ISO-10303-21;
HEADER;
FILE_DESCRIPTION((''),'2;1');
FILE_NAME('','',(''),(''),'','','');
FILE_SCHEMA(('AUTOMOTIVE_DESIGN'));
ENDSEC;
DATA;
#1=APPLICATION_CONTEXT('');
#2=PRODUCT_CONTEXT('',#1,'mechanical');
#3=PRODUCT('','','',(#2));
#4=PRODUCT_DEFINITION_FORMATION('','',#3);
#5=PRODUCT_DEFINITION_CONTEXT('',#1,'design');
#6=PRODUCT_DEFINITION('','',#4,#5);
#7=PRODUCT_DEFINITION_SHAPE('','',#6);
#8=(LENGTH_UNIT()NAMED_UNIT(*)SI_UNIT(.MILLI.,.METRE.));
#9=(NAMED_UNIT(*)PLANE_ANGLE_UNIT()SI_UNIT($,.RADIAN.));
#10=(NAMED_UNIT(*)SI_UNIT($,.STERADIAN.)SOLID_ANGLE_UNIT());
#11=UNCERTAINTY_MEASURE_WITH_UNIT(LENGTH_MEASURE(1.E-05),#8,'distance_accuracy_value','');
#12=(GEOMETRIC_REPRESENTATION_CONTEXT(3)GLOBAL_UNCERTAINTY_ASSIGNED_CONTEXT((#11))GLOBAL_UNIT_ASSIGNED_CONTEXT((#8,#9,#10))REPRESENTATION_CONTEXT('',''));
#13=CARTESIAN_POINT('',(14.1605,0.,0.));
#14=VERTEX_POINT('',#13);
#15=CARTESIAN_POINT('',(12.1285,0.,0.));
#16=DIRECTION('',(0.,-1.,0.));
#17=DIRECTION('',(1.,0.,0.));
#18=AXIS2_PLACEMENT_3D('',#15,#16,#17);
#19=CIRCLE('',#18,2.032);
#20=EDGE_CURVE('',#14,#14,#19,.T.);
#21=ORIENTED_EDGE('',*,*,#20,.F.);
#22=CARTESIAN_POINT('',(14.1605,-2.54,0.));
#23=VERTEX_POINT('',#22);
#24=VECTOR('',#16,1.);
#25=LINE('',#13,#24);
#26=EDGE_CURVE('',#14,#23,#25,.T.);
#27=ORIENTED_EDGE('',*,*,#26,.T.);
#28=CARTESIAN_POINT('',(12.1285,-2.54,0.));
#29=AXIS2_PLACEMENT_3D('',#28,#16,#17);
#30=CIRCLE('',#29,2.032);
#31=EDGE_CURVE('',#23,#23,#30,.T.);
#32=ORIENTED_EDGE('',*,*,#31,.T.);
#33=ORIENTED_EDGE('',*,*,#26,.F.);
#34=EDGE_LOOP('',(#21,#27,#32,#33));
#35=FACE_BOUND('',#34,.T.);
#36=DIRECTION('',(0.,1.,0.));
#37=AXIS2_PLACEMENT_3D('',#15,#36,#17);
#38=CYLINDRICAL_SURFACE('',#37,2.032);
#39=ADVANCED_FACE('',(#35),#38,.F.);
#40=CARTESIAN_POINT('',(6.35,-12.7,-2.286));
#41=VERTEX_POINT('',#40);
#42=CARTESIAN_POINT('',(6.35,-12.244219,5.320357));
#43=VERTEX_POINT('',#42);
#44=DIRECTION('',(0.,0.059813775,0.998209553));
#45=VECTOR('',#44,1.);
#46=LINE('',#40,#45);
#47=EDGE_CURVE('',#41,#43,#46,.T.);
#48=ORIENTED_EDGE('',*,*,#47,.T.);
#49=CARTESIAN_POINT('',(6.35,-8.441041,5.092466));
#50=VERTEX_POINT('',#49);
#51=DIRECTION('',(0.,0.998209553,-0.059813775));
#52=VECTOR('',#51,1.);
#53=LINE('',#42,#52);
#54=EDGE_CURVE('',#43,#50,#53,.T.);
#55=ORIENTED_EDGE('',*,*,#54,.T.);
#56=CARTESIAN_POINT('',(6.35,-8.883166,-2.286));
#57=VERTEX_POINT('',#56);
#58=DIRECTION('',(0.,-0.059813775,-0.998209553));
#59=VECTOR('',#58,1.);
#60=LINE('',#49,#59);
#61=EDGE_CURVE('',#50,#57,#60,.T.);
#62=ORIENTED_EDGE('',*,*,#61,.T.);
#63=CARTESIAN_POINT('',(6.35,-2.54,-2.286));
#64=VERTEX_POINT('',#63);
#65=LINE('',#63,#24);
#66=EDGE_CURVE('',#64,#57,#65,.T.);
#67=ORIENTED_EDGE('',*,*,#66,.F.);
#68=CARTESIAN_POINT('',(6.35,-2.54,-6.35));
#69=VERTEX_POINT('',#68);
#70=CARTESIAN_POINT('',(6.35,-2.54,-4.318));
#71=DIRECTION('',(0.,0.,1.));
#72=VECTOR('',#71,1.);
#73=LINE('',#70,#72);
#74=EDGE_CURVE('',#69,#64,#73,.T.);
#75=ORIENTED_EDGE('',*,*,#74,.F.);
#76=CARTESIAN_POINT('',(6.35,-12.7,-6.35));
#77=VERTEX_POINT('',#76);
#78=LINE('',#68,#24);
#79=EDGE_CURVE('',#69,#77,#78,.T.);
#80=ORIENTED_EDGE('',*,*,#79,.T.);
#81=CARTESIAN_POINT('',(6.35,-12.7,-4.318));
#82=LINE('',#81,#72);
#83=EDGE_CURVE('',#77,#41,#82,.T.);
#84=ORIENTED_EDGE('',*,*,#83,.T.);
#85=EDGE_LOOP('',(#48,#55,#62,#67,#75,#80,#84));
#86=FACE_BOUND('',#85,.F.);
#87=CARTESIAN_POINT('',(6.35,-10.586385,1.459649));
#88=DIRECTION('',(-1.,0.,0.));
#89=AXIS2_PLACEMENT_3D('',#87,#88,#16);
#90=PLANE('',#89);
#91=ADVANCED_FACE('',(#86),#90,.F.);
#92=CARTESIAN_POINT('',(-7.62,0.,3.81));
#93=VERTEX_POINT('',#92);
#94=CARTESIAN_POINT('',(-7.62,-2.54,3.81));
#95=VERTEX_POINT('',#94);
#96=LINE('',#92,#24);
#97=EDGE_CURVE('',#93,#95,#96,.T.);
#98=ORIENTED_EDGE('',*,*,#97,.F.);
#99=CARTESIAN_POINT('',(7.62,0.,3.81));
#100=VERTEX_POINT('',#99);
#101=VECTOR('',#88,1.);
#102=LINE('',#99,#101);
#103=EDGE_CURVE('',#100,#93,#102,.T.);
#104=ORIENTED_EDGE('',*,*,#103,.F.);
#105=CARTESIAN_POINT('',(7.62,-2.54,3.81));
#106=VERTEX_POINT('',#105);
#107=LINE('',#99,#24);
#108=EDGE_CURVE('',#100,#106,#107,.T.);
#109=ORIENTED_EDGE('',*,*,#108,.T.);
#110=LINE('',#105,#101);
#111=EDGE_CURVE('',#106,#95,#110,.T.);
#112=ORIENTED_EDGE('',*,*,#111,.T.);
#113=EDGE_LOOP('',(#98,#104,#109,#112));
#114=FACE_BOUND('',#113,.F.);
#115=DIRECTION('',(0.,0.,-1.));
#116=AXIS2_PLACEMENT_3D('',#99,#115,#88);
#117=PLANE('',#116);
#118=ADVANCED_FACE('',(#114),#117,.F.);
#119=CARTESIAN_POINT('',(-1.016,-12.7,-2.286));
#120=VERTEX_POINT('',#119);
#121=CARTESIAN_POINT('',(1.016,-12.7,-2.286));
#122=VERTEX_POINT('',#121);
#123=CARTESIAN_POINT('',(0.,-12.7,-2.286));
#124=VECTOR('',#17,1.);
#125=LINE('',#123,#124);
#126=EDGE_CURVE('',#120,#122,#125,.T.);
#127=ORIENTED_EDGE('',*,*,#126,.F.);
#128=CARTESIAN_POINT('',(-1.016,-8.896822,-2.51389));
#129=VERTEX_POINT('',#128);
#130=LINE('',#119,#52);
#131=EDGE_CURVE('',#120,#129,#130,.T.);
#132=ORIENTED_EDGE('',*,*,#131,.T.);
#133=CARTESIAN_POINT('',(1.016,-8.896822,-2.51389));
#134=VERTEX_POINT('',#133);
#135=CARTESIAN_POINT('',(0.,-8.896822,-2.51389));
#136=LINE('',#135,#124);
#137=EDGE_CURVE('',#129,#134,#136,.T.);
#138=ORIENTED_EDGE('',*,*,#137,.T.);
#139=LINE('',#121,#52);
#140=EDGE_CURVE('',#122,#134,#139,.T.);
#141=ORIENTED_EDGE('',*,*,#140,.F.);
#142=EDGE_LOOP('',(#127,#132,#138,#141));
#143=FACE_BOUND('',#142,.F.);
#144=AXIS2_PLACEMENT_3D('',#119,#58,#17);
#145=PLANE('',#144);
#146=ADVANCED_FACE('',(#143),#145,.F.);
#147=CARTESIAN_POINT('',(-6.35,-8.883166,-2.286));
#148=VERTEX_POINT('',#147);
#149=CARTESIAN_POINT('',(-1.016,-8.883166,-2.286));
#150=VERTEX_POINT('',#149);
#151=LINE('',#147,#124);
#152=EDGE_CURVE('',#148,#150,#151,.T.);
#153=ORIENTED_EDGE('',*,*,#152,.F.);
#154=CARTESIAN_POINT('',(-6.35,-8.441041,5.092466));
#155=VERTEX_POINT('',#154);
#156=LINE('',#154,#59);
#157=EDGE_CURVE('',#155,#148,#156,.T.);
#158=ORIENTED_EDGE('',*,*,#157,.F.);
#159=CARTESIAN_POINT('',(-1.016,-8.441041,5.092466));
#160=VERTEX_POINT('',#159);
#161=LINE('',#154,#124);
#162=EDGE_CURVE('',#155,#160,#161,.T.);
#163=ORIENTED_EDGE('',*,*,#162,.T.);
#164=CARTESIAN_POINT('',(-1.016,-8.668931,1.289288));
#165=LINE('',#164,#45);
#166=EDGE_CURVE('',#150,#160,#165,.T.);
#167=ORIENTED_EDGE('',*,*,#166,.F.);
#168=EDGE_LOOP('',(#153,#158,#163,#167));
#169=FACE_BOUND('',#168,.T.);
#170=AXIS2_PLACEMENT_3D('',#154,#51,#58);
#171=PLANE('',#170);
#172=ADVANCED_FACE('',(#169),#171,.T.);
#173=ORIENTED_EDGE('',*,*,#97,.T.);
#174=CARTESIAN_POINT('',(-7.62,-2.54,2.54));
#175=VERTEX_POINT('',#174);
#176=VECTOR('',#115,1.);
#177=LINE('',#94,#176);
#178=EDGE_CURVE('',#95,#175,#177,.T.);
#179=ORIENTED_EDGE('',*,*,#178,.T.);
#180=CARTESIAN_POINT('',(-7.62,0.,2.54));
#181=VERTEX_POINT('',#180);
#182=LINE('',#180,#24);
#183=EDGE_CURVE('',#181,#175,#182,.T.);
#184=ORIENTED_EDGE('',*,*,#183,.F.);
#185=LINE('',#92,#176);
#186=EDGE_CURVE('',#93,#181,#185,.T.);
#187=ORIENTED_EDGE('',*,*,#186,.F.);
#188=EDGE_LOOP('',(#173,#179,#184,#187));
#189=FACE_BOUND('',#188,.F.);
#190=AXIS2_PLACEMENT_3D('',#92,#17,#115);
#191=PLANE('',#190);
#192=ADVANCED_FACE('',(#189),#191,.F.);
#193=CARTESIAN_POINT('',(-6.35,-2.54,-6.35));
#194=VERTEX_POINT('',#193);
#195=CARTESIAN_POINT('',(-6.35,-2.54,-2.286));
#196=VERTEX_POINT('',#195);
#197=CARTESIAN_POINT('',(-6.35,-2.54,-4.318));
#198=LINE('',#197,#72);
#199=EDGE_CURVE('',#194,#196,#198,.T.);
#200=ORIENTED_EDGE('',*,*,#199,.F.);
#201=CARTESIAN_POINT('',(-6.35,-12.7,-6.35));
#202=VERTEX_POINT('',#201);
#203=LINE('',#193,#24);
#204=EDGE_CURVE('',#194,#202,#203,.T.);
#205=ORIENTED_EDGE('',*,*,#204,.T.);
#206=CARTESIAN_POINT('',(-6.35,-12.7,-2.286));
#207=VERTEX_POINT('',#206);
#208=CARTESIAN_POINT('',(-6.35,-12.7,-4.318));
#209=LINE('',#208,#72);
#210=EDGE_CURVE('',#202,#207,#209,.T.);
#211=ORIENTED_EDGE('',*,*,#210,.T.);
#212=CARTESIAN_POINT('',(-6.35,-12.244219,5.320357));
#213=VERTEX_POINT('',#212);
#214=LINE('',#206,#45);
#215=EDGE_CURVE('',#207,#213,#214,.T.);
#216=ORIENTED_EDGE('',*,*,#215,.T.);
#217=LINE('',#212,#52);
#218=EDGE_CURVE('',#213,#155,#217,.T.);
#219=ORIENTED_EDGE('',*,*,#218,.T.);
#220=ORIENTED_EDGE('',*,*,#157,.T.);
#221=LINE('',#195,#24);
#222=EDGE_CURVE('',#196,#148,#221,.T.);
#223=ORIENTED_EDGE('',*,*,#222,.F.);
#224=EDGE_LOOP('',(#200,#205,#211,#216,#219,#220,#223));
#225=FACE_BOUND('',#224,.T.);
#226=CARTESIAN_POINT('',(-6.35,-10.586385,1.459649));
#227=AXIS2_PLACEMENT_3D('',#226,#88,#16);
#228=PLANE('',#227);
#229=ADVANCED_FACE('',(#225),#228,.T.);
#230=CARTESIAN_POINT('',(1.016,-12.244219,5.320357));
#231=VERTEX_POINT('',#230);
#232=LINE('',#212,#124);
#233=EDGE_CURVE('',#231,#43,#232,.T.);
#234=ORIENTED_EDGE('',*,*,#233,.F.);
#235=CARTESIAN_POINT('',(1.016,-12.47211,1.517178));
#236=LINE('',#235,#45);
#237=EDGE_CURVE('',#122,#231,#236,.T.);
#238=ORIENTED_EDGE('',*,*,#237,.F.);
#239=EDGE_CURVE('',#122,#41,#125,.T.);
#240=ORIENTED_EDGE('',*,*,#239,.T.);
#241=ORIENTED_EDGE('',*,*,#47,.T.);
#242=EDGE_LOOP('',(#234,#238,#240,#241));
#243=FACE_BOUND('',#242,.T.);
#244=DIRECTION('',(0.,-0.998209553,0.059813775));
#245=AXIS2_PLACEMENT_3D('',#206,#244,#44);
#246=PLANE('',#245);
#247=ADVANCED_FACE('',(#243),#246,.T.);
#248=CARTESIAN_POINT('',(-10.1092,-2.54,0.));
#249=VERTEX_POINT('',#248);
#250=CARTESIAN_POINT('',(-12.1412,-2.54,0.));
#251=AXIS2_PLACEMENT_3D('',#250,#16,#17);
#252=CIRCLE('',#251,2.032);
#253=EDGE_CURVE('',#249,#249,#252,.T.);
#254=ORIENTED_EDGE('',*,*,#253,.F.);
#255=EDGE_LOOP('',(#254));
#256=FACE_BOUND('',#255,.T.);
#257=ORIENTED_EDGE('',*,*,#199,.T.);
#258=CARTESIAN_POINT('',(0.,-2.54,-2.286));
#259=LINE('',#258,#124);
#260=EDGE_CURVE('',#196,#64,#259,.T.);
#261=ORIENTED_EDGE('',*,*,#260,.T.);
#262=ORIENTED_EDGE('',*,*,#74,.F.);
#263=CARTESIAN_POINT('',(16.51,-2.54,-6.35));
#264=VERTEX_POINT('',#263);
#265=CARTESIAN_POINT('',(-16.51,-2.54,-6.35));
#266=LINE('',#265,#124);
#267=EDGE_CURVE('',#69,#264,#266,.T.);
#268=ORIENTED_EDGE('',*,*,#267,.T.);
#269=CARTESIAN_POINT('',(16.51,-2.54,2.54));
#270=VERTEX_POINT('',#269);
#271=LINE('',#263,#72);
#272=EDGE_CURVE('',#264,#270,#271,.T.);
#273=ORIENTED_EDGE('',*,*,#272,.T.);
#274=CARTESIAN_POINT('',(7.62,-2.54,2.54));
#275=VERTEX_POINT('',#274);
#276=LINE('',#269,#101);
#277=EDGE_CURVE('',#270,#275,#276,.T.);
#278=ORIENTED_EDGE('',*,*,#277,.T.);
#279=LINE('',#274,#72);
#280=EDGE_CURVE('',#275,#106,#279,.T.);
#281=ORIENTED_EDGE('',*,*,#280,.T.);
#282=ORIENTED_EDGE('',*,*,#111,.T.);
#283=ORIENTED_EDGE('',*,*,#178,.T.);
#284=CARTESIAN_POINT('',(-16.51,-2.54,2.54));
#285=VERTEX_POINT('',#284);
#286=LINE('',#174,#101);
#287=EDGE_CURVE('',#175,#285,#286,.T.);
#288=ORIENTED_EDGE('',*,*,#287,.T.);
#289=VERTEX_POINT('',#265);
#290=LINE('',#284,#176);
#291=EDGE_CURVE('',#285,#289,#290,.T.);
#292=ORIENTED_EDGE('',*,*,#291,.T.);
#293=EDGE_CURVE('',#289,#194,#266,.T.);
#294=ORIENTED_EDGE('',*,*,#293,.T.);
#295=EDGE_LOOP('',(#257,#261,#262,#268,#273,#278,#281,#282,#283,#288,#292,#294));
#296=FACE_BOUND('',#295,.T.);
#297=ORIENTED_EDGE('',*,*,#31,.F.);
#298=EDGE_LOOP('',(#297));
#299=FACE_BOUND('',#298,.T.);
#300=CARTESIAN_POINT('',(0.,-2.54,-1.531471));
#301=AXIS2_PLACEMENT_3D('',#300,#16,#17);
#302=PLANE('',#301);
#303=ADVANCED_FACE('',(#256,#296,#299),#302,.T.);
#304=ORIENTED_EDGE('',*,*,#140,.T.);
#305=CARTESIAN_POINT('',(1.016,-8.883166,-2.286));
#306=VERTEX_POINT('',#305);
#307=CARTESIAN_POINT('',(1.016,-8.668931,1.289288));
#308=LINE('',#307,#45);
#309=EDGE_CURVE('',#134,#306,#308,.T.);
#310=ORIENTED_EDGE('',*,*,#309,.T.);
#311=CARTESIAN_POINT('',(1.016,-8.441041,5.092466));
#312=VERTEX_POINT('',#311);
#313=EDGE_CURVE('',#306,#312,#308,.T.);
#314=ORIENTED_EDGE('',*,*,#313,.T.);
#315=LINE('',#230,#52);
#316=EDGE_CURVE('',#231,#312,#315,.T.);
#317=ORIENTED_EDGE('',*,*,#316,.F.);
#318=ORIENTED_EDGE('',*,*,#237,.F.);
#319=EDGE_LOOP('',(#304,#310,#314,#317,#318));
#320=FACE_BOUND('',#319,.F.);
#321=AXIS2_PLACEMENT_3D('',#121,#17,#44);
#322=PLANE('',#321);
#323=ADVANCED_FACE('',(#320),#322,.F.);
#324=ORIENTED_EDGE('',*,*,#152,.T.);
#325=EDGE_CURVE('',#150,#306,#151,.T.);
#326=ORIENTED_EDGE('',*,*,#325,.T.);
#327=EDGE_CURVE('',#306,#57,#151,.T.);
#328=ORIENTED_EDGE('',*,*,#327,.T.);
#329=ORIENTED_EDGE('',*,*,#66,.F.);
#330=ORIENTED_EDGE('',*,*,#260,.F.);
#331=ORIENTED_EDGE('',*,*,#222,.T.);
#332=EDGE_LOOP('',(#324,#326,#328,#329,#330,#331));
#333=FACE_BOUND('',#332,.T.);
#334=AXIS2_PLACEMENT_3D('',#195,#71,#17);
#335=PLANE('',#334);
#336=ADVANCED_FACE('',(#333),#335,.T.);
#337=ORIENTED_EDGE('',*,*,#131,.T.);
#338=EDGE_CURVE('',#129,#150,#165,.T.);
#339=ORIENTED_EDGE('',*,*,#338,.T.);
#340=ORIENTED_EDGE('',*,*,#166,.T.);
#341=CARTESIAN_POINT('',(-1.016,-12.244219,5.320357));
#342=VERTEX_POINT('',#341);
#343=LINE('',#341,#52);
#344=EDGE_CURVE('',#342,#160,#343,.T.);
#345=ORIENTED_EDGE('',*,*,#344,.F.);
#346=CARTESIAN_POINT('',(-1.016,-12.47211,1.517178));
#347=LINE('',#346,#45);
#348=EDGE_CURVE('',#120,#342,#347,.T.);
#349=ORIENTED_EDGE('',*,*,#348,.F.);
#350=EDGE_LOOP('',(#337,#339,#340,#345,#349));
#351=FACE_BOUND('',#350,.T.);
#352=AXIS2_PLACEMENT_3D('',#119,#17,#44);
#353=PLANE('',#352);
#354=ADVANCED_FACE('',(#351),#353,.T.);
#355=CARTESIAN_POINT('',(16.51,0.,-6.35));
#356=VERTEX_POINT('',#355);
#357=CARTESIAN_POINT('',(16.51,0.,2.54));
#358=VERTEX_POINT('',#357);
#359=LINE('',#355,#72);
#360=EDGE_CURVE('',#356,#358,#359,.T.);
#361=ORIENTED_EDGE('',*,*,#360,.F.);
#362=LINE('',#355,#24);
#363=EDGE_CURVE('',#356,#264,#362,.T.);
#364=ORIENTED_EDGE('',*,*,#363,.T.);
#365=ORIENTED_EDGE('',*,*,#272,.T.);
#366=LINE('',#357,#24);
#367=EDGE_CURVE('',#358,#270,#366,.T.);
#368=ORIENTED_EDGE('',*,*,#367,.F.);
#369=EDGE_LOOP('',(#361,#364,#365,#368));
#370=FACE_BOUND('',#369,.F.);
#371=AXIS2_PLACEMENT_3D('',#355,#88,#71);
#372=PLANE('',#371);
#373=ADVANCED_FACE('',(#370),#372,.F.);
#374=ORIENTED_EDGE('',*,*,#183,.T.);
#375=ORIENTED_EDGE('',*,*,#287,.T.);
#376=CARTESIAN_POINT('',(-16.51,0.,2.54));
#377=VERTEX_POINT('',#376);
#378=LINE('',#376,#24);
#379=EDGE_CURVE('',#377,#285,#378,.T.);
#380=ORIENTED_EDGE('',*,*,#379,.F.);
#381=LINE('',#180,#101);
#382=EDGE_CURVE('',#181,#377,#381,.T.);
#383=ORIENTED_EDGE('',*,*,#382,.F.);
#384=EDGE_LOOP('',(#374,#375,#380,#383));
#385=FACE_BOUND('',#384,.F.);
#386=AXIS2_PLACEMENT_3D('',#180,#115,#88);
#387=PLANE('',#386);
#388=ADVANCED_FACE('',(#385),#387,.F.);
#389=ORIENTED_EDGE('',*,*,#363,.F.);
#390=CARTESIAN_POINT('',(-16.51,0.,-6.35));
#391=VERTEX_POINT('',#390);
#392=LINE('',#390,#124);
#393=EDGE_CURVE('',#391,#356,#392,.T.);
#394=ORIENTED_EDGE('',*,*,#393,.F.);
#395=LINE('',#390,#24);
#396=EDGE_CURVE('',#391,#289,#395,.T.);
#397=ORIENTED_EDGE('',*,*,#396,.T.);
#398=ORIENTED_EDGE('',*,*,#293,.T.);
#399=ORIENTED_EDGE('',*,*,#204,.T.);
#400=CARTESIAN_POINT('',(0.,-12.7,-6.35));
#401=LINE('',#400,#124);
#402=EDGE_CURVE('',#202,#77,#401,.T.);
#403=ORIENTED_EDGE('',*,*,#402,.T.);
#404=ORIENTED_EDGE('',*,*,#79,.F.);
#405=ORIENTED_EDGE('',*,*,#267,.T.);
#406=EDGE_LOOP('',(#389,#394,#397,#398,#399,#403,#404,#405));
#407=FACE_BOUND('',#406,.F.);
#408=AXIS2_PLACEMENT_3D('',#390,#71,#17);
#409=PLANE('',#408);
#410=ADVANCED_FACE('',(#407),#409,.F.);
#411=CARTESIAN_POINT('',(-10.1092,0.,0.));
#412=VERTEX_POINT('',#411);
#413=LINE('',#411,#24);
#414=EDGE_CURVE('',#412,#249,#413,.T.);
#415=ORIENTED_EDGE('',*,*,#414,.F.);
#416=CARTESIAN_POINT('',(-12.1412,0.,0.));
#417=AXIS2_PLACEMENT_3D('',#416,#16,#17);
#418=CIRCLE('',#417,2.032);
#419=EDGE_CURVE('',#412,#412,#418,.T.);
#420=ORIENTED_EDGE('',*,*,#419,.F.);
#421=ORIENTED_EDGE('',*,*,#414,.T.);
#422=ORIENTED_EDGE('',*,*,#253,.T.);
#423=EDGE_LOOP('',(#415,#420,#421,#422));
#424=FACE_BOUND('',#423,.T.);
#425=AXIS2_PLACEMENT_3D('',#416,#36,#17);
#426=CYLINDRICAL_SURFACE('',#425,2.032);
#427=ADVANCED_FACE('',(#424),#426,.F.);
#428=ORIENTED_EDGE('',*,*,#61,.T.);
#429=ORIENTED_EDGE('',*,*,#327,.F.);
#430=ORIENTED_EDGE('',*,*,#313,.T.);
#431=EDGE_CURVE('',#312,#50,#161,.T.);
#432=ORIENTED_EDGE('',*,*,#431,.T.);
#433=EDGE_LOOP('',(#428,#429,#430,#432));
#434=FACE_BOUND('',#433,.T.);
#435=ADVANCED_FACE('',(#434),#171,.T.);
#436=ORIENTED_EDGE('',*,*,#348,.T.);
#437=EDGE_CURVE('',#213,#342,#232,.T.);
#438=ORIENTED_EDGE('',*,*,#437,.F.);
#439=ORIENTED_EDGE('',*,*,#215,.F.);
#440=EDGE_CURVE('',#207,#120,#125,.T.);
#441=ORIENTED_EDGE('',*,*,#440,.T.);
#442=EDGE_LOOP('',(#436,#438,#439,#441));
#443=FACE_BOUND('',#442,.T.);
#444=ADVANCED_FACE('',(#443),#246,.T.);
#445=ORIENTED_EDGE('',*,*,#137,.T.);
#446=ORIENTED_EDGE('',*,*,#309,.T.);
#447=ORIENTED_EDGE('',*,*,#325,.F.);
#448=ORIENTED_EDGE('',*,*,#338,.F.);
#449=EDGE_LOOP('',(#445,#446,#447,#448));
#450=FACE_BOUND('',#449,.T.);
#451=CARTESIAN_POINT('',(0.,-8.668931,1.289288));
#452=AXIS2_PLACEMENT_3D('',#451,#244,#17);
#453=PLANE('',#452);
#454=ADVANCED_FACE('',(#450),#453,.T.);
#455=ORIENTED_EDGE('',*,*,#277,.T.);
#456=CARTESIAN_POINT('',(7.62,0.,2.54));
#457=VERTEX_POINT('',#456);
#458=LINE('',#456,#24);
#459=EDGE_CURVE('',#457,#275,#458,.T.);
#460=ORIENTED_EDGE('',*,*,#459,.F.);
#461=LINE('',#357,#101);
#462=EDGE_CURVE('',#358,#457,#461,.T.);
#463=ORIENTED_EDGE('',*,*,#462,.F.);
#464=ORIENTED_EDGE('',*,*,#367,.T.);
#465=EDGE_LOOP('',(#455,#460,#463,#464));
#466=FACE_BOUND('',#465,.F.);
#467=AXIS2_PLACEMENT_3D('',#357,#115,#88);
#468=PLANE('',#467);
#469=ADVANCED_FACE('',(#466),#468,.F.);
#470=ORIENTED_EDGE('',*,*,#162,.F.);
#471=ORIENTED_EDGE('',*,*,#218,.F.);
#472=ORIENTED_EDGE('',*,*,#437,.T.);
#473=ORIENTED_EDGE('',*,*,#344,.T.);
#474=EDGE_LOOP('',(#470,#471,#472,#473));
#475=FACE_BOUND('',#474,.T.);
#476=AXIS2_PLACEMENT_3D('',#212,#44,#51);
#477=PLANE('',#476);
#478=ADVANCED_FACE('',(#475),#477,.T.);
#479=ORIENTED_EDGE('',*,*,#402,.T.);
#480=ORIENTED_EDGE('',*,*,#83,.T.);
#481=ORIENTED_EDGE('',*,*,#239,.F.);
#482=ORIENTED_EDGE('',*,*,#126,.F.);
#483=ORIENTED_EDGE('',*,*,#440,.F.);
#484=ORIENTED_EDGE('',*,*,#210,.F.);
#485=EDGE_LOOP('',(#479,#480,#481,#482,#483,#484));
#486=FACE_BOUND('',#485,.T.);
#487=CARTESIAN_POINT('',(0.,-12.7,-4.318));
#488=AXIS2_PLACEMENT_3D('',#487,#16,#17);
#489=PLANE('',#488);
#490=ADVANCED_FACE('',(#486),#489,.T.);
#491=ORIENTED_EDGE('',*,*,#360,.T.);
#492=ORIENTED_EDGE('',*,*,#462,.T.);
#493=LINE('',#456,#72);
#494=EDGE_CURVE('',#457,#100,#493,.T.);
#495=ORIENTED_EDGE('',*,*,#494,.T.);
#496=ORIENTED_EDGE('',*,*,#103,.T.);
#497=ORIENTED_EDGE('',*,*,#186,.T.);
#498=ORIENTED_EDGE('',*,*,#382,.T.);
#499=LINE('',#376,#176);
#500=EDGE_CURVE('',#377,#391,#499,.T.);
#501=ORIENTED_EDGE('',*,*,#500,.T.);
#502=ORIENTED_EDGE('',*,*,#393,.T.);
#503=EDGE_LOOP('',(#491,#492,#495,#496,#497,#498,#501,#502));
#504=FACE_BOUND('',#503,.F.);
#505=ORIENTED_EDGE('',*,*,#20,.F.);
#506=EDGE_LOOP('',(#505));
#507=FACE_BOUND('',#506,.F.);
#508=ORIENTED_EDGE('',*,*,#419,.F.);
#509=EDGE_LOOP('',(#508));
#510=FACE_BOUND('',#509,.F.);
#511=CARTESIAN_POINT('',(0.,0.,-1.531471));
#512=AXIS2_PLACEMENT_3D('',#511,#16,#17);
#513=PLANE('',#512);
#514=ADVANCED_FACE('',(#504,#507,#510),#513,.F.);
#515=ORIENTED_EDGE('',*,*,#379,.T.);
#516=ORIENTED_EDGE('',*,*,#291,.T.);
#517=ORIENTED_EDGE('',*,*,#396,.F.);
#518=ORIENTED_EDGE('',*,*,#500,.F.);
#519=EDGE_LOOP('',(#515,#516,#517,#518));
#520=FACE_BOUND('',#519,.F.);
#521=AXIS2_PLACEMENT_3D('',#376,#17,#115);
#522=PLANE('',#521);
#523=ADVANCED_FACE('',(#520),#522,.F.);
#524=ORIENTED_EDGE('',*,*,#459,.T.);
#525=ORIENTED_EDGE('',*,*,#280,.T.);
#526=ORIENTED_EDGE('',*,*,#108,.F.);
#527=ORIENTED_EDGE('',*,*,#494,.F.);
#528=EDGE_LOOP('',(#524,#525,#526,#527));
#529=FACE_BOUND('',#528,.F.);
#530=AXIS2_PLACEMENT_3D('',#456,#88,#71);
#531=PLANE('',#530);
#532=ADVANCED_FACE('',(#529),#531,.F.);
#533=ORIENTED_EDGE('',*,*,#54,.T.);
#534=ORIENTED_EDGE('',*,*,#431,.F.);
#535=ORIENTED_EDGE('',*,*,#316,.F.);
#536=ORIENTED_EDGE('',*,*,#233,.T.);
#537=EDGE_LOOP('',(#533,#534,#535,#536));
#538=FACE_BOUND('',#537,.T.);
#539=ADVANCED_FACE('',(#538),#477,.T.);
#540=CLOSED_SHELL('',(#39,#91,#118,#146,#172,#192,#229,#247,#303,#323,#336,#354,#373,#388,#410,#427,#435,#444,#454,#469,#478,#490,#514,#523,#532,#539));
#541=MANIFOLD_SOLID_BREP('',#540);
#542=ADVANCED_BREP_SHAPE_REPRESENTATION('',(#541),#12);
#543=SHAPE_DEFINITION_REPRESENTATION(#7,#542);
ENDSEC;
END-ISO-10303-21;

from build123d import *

# Parameters (mm, degrees)
F0_R     = 2.032
F1_DEPTH = 2.54
F2_W     = 12.7
F2_H     = 4.064
F3_DEPTH = 10.16
F5_DEPTH = 12.7
F6_W     = 2.032
F6_H     = 7.62
F7_DEPTH = 3.81


with BuildPart() as f1:
    # F0 (on Front) → F1 (new body)
    with BuildSketch(Plane.XZ):
        Polygon((7.62, 3.81), (-7.62, 3.81), (-7.62, 2.54), (-16.51, 2.54), (-16.51, -6.35), (16.51, -6.35), (16.51, 2.54), (7.62, 2.54), align=None)
        with Locations((-12.1412, 0)):
            Circle(F0_R, mode=Mode.SUBTRACT)
        with Locations((12.1285, 0)):
            Circle(F0_R, mode=Mode.SUBTRACT)
    extrude(amount=F1_DEPTH)

    # F2 (on face) → F3 (join)
    with BuildSketch(Plane.XZ.offset(2.54)):
        with Locations((0, -4.318)):
            Rectangle(F2_W, F2_H)
    extrude(amount=F3_DEPTH)

    # F4 (on face) → F5 (join)
    with BuildSketch(Plane(origin=(-6.35, 0, 0), x_dir=(0, -1, 0), z_dir=(-1, 0, 0))):
        Polygon((8.8831661625, -2.286), (12.7, -2.286), (12.2442190351, 5.3203567963), (8.441040637, 5.0924663138), align=None)
    extrude(amount=-F5_DEPTH)

    # F6 (on face) → F7 (cut)
    with BuildSketch(Plane(origin=(0, -12.5180738926, 0.7500962617), x_dir=(1, 0, 0), z_dir=(0, -0.9982095533, 0.0598137749))):
        with Locations((0, 0.7684580196)):
            Rectangle(F6_W, F6_H)
    extrude(amount=-F7_DEPTH, mode=Mode.SUBTRACT)


solid = f1.part
